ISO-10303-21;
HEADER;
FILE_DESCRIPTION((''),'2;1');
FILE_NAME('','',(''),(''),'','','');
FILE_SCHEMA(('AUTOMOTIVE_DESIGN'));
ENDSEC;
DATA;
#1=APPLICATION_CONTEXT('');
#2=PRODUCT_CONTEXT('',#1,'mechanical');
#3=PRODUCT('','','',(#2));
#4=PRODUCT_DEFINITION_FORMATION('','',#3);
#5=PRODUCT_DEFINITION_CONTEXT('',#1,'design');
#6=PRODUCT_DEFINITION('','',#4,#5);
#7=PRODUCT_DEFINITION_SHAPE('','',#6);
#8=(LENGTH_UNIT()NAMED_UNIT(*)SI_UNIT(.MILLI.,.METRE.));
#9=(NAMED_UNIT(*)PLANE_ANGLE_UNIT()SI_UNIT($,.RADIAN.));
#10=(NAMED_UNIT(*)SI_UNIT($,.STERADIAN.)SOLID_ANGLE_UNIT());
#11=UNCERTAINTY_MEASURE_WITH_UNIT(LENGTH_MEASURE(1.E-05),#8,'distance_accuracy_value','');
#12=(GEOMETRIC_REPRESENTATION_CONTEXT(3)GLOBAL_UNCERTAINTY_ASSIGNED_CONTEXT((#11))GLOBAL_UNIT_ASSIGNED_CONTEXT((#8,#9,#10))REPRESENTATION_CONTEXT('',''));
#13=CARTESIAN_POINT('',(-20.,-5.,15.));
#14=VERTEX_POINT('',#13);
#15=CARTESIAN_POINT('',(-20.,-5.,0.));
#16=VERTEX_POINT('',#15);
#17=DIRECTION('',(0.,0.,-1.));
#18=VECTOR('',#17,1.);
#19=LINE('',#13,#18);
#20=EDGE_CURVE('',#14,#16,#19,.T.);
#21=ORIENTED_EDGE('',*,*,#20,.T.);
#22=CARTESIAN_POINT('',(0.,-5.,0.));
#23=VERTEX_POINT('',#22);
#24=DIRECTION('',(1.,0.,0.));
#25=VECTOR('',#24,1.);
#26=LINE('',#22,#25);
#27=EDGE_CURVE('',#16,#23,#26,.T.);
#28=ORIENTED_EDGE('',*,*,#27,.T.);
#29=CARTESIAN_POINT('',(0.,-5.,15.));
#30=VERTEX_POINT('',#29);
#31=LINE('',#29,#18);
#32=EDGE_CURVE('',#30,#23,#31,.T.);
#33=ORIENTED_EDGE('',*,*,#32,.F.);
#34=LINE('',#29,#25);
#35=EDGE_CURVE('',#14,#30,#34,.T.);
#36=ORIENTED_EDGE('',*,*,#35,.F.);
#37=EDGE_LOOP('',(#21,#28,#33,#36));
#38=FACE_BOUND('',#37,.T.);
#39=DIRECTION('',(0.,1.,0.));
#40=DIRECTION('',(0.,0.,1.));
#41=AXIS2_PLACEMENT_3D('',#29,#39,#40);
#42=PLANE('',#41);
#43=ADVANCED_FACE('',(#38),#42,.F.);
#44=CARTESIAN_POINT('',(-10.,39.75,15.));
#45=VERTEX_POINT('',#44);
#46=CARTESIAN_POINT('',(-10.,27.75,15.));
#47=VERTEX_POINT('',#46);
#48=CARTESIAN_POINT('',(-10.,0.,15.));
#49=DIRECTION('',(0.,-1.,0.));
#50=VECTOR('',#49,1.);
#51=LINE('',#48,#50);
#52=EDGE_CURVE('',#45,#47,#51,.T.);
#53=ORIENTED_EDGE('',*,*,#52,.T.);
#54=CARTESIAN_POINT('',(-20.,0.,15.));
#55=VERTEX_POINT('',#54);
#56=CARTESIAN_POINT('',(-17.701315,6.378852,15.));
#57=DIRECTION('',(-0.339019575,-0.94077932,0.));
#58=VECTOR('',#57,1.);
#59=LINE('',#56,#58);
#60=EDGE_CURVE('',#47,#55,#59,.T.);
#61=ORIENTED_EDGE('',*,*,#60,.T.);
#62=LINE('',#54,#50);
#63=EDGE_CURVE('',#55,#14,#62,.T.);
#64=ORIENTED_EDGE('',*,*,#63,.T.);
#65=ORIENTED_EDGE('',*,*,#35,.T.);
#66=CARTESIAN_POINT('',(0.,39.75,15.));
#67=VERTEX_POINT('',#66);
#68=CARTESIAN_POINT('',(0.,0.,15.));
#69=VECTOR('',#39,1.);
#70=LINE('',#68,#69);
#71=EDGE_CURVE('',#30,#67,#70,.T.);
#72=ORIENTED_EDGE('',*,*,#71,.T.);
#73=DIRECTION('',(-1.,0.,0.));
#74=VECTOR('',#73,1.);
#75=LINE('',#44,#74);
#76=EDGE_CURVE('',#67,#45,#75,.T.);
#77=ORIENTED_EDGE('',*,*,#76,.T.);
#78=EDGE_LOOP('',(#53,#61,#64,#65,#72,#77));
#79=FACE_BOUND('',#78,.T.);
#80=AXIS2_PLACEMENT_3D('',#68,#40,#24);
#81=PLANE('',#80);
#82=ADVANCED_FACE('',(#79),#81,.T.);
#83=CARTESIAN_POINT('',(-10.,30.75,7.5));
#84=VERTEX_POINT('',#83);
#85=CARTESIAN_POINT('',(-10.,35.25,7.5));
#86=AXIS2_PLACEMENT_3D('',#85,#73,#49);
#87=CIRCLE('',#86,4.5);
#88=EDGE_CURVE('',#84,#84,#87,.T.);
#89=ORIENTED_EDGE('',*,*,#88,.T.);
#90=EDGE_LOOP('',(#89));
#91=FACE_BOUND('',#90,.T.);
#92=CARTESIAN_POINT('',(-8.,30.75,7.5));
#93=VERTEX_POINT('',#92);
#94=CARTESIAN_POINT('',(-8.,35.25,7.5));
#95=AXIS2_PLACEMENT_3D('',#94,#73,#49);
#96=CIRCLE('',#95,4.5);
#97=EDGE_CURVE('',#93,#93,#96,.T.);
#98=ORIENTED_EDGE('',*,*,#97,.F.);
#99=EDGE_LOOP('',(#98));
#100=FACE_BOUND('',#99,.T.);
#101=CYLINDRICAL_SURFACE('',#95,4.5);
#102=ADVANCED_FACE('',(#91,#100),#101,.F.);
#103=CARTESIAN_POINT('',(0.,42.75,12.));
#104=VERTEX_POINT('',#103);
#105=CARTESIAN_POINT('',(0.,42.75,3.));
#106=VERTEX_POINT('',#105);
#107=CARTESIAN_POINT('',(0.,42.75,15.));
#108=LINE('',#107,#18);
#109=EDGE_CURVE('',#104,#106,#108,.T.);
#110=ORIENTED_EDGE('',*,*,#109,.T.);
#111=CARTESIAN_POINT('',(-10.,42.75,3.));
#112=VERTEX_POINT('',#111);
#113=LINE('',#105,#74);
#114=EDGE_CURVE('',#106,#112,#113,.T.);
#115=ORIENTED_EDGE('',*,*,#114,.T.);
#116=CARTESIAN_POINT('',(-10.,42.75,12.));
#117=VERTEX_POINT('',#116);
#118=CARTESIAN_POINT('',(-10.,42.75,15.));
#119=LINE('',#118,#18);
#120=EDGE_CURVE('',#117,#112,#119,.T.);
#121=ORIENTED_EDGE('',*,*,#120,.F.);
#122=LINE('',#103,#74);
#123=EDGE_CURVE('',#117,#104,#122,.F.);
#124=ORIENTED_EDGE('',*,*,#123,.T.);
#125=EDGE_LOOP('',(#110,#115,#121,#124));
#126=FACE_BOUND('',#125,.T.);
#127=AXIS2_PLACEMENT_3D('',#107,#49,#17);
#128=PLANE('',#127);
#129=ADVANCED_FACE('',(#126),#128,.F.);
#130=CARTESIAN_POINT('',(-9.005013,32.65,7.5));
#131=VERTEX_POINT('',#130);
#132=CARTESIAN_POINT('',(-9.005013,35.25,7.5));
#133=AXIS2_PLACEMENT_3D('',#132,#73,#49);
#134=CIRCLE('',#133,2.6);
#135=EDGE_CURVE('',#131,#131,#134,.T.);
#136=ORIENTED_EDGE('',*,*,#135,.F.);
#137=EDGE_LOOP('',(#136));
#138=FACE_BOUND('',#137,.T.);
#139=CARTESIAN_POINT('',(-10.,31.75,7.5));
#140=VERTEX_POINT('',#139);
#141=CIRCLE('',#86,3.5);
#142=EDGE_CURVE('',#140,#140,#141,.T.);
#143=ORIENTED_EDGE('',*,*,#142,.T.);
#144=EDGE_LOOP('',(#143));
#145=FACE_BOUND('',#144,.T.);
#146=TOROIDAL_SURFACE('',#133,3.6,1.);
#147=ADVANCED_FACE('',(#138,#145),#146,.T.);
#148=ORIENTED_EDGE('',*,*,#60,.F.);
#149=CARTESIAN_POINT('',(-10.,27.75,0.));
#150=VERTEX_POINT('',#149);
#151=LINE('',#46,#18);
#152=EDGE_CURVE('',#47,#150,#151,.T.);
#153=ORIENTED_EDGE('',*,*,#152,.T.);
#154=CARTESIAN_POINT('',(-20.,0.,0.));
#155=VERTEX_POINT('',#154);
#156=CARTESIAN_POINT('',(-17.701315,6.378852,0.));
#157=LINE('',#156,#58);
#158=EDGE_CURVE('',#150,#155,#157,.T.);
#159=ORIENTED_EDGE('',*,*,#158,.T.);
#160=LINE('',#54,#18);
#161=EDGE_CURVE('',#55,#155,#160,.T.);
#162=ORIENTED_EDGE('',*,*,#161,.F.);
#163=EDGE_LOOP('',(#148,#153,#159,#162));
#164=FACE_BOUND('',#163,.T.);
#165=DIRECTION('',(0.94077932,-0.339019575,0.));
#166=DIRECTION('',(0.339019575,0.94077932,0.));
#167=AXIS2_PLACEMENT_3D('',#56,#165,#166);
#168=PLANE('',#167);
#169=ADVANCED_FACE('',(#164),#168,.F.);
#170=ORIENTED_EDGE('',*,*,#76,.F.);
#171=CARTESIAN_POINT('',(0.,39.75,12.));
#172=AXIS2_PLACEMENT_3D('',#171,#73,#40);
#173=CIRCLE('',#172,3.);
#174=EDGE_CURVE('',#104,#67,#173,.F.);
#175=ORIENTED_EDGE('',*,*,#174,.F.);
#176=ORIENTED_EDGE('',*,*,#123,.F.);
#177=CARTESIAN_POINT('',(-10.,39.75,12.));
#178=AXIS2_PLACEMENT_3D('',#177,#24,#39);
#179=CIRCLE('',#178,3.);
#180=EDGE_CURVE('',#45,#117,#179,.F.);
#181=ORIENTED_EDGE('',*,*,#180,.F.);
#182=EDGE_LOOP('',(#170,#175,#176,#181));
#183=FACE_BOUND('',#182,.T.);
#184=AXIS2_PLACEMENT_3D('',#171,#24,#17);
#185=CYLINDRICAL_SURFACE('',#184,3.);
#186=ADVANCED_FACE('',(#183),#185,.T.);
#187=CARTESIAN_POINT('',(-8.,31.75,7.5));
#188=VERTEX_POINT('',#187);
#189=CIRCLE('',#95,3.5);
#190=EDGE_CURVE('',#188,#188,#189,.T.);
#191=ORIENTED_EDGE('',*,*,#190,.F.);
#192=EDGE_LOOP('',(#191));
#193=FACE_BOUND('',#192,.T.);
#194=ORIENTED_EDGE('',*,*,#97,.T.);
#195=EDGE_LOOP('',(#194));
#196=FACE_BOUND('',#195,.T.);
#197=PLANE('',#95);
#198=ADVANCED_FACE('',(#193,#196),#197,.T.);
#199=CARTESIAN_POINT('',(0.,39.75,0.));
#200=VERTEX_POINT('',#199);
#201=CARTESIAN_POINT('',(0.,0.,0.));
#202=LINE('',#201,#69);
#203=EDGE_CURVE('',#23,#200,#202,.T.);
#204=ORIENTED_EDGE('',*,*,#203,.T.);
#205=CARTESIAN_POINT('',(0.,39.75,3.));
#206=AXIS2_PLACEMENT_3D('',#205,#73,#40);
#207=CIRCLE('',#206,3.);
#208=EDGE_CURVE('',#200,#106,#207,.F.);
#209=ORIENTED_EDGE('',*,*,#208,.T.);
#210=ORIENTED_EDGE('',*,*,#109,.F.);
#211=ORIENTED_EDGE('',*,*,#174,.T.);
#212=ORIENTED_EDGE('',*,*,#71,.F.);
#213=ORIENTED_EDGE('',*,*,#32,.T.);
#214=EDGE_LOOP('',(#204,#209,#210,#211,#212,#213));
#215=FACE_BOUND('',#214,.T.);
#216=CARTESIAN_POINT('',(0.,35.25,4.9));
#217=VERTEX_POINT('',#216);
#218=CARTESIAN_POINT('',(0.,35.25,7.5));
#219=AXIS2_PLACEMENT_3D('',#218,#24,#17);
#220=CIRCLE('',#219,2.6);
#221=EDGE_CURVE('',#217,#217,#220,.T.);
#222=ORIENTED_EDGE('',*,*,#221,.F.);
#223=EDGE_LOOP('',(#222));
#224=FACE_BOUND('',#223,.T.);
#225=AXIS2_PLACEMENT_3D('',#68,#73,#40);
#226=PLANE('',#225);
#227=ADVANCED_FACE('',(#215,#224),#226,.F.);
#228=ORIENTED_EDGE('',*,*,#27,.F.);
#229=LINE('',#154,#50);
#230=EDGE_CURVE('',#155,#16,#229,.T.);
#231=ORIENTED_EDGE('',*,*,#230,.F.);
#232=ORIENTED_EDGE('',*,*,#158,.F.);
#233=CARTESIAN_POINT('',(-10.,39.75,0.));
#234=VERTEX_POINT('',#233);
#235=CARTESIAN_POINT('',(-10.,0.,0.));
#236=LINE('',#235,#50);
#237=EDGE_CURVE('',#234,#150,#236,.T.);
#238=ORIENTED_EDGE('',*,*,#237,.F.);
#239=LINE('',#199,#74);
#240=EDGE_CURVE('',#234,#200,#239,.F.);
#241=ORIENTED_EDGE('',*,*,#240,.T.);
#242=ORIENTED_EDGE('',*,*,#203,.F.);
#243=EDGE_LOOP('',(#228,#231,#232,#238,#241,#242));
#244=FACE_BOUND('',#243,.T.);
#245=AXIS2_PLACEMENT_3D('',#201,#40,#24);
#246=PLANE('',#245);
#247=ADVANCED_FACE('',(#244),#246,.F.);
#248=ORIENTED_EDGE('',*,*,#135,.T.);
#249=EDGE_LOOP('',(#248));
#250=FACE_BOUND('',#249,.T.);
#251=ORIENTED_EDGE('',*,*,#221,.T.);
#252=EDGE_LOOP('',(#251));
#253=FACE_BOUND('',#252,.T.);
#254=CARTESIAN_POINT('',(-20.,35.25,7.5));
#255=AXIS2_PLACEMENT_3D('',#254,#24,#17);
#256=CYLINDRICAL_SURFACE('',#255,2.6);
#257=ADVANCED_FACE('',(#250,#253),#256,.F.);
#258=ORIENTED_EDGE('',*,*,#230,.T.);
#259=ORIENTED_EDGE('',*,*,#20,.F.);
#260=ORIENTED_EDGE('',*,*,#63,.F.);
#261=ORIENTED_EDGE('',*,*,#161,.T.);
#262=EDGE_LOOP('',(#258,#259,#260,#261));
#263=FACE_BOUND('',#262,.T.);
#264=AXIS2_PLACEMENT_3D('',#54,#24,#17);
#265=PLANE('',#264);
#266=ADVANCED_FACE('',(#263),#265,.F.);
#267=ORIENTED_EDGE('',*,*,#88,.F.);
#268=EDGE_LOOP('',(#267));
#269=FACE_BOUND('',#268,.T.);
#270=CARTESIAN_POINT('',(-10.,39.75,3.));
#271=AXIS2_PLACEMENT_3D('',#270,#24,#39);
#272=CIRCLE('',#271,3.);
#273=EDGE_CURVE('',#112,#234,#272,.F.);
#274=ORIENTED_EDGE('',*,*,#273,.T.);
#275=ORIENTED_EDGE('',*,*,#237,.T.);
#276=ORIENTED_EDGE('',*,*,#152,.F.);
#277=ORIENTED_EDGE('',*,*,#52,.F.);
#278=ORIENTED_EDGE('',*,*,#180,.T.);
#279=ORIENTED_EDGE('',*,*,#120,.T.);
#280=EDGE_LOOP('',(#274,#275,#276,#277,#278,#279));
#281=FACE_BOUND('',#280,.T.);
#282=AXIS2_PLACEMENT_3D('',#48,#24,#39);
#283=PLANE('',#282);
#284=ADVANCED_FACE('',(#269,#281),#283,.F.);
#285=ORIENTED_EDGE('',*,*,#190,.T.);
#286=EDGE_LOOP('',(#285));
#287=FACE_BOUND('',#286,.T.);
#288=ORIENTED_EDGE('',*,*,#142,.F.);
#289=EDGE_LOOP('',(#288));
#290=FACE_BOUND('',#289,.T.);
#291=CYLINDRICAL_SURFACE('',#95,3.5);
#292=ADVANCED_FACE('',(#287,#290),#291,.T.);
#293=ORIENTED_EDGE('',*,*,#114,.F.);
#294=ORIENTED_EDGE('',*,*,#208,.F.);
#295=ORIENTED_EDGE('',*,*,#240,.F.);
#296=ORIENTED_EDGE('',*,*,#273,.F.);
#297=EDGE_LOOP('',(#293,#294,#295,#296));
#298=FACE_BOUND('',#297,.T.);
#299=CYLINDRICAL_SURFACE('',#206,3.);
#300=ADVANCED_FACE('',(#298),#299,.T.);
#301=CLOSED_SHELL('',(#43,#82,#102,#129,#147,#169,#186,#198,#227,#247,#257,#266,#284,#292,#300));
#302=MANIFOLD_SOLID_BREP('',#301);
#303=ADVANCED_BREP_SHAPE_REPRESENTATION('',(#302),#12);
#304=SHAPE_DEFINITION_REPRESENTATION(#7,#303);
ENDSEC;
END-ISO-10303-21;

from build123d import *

# Parameters (mm, degrees)
SKETCH_1_W          = 20
SKETCH_1_H          = 5
EXTRUDE_1_DEPTH     = 15
FILLET_1_R          = 3
SKETCH_3_R          = 2.6
CUT_EXTRUDE_1_DEPTH = 50.523353077
SKETCH_9_R          = 4.5
SKETCH_9_R_2        = 3.5
CUT_EXTRUDE_2_DEPTH = 2
FILLET_2_R          = 1


with BuildPart() as part:
    # 草图1 → 凸台-拉伸1 (new body)
    with BuildSketch(Plane.XY):
        Polygon((-10, 27.75), (-20, 0), (0, 0), (0, 42.75), (-10, 42.75), align=None)
        with Locations((-10, -2.5)):
            Rectangle(SKETCH_1_W, SKETCH_1_H)
    extrude(amount=EXTRUDE_1_DEPTH)

    # 圆角1
    fillet_1_edges = [part.edges().sort_by_distance(p)[0] for p in [
        (-5, 42.75, 15),
        (-5, 42.75, 0),
    ]]
    fillet(fillet_1_edges, radius=FILLET_1_R)

    # 草图3 → 切除-拉伸1 (cut, through all)
    with BuildSketch(Plane(origin=(0, 0, 0), x_dir=(0, 0, -1), z_dir=(1, 0, 0))):
        with Locations((-7.5, 35.25)):
            Circle(SKETCH_3_R)
    extrude(amount=-CUT_EXTRUDE_1_DEPTH, mode=Mode.SUBTRACT)

    # 草图9 → 切除-拉伸2 (cut)
    with BuildSketch(Plane.ZY.offset(10)):
        with Locations(Location((7.5, 35.25, 0), (0, 0, 270))):
            Circle(SKETCH_9_R)
        with Locations(Location((7.5, 35.25, 0), (0, 0, 270))):
            Circle(SKETCH_9_R_2, mode=Mode.SUBTRACT)
    extrude(amount=-CUT_EXTRUDE_2_DEPTH, mode=Mode.SUBTRACT)

    # 圆角2
    # the kernel refuses this fillet: 1 mm, written as the material it takes off along each edge
    with BuildSketch(Plane(origin=(-10, 35.25, 7.5), x_dir=(0, 0, -1), z_dir=(0, -1, 0))) as fillet_2_piece_1:
        with BuildLine():
            CenterArc((3.6, 0.994987437), FILLET_2_R, 180, 84.260829523)
            Line((3.5, 0), (3.498, -0.019899749))
            ThreePointArc((3.498, -0.019899749), (3.05, -0.02), (2.6, -0.02))
            Line((2.6, -0.02), (2.58, 0))
            Line((2.58, 0), (2.58, 0.994987437))
            Line((2.58, 0.994987437), (2.6, 0.994987437))
        make_face()
    revolve(axis=Axis((-10, 35.25, 7.5), (1, 0, 0)), mode=Mode.SUBTRACT)


solid = part.part
